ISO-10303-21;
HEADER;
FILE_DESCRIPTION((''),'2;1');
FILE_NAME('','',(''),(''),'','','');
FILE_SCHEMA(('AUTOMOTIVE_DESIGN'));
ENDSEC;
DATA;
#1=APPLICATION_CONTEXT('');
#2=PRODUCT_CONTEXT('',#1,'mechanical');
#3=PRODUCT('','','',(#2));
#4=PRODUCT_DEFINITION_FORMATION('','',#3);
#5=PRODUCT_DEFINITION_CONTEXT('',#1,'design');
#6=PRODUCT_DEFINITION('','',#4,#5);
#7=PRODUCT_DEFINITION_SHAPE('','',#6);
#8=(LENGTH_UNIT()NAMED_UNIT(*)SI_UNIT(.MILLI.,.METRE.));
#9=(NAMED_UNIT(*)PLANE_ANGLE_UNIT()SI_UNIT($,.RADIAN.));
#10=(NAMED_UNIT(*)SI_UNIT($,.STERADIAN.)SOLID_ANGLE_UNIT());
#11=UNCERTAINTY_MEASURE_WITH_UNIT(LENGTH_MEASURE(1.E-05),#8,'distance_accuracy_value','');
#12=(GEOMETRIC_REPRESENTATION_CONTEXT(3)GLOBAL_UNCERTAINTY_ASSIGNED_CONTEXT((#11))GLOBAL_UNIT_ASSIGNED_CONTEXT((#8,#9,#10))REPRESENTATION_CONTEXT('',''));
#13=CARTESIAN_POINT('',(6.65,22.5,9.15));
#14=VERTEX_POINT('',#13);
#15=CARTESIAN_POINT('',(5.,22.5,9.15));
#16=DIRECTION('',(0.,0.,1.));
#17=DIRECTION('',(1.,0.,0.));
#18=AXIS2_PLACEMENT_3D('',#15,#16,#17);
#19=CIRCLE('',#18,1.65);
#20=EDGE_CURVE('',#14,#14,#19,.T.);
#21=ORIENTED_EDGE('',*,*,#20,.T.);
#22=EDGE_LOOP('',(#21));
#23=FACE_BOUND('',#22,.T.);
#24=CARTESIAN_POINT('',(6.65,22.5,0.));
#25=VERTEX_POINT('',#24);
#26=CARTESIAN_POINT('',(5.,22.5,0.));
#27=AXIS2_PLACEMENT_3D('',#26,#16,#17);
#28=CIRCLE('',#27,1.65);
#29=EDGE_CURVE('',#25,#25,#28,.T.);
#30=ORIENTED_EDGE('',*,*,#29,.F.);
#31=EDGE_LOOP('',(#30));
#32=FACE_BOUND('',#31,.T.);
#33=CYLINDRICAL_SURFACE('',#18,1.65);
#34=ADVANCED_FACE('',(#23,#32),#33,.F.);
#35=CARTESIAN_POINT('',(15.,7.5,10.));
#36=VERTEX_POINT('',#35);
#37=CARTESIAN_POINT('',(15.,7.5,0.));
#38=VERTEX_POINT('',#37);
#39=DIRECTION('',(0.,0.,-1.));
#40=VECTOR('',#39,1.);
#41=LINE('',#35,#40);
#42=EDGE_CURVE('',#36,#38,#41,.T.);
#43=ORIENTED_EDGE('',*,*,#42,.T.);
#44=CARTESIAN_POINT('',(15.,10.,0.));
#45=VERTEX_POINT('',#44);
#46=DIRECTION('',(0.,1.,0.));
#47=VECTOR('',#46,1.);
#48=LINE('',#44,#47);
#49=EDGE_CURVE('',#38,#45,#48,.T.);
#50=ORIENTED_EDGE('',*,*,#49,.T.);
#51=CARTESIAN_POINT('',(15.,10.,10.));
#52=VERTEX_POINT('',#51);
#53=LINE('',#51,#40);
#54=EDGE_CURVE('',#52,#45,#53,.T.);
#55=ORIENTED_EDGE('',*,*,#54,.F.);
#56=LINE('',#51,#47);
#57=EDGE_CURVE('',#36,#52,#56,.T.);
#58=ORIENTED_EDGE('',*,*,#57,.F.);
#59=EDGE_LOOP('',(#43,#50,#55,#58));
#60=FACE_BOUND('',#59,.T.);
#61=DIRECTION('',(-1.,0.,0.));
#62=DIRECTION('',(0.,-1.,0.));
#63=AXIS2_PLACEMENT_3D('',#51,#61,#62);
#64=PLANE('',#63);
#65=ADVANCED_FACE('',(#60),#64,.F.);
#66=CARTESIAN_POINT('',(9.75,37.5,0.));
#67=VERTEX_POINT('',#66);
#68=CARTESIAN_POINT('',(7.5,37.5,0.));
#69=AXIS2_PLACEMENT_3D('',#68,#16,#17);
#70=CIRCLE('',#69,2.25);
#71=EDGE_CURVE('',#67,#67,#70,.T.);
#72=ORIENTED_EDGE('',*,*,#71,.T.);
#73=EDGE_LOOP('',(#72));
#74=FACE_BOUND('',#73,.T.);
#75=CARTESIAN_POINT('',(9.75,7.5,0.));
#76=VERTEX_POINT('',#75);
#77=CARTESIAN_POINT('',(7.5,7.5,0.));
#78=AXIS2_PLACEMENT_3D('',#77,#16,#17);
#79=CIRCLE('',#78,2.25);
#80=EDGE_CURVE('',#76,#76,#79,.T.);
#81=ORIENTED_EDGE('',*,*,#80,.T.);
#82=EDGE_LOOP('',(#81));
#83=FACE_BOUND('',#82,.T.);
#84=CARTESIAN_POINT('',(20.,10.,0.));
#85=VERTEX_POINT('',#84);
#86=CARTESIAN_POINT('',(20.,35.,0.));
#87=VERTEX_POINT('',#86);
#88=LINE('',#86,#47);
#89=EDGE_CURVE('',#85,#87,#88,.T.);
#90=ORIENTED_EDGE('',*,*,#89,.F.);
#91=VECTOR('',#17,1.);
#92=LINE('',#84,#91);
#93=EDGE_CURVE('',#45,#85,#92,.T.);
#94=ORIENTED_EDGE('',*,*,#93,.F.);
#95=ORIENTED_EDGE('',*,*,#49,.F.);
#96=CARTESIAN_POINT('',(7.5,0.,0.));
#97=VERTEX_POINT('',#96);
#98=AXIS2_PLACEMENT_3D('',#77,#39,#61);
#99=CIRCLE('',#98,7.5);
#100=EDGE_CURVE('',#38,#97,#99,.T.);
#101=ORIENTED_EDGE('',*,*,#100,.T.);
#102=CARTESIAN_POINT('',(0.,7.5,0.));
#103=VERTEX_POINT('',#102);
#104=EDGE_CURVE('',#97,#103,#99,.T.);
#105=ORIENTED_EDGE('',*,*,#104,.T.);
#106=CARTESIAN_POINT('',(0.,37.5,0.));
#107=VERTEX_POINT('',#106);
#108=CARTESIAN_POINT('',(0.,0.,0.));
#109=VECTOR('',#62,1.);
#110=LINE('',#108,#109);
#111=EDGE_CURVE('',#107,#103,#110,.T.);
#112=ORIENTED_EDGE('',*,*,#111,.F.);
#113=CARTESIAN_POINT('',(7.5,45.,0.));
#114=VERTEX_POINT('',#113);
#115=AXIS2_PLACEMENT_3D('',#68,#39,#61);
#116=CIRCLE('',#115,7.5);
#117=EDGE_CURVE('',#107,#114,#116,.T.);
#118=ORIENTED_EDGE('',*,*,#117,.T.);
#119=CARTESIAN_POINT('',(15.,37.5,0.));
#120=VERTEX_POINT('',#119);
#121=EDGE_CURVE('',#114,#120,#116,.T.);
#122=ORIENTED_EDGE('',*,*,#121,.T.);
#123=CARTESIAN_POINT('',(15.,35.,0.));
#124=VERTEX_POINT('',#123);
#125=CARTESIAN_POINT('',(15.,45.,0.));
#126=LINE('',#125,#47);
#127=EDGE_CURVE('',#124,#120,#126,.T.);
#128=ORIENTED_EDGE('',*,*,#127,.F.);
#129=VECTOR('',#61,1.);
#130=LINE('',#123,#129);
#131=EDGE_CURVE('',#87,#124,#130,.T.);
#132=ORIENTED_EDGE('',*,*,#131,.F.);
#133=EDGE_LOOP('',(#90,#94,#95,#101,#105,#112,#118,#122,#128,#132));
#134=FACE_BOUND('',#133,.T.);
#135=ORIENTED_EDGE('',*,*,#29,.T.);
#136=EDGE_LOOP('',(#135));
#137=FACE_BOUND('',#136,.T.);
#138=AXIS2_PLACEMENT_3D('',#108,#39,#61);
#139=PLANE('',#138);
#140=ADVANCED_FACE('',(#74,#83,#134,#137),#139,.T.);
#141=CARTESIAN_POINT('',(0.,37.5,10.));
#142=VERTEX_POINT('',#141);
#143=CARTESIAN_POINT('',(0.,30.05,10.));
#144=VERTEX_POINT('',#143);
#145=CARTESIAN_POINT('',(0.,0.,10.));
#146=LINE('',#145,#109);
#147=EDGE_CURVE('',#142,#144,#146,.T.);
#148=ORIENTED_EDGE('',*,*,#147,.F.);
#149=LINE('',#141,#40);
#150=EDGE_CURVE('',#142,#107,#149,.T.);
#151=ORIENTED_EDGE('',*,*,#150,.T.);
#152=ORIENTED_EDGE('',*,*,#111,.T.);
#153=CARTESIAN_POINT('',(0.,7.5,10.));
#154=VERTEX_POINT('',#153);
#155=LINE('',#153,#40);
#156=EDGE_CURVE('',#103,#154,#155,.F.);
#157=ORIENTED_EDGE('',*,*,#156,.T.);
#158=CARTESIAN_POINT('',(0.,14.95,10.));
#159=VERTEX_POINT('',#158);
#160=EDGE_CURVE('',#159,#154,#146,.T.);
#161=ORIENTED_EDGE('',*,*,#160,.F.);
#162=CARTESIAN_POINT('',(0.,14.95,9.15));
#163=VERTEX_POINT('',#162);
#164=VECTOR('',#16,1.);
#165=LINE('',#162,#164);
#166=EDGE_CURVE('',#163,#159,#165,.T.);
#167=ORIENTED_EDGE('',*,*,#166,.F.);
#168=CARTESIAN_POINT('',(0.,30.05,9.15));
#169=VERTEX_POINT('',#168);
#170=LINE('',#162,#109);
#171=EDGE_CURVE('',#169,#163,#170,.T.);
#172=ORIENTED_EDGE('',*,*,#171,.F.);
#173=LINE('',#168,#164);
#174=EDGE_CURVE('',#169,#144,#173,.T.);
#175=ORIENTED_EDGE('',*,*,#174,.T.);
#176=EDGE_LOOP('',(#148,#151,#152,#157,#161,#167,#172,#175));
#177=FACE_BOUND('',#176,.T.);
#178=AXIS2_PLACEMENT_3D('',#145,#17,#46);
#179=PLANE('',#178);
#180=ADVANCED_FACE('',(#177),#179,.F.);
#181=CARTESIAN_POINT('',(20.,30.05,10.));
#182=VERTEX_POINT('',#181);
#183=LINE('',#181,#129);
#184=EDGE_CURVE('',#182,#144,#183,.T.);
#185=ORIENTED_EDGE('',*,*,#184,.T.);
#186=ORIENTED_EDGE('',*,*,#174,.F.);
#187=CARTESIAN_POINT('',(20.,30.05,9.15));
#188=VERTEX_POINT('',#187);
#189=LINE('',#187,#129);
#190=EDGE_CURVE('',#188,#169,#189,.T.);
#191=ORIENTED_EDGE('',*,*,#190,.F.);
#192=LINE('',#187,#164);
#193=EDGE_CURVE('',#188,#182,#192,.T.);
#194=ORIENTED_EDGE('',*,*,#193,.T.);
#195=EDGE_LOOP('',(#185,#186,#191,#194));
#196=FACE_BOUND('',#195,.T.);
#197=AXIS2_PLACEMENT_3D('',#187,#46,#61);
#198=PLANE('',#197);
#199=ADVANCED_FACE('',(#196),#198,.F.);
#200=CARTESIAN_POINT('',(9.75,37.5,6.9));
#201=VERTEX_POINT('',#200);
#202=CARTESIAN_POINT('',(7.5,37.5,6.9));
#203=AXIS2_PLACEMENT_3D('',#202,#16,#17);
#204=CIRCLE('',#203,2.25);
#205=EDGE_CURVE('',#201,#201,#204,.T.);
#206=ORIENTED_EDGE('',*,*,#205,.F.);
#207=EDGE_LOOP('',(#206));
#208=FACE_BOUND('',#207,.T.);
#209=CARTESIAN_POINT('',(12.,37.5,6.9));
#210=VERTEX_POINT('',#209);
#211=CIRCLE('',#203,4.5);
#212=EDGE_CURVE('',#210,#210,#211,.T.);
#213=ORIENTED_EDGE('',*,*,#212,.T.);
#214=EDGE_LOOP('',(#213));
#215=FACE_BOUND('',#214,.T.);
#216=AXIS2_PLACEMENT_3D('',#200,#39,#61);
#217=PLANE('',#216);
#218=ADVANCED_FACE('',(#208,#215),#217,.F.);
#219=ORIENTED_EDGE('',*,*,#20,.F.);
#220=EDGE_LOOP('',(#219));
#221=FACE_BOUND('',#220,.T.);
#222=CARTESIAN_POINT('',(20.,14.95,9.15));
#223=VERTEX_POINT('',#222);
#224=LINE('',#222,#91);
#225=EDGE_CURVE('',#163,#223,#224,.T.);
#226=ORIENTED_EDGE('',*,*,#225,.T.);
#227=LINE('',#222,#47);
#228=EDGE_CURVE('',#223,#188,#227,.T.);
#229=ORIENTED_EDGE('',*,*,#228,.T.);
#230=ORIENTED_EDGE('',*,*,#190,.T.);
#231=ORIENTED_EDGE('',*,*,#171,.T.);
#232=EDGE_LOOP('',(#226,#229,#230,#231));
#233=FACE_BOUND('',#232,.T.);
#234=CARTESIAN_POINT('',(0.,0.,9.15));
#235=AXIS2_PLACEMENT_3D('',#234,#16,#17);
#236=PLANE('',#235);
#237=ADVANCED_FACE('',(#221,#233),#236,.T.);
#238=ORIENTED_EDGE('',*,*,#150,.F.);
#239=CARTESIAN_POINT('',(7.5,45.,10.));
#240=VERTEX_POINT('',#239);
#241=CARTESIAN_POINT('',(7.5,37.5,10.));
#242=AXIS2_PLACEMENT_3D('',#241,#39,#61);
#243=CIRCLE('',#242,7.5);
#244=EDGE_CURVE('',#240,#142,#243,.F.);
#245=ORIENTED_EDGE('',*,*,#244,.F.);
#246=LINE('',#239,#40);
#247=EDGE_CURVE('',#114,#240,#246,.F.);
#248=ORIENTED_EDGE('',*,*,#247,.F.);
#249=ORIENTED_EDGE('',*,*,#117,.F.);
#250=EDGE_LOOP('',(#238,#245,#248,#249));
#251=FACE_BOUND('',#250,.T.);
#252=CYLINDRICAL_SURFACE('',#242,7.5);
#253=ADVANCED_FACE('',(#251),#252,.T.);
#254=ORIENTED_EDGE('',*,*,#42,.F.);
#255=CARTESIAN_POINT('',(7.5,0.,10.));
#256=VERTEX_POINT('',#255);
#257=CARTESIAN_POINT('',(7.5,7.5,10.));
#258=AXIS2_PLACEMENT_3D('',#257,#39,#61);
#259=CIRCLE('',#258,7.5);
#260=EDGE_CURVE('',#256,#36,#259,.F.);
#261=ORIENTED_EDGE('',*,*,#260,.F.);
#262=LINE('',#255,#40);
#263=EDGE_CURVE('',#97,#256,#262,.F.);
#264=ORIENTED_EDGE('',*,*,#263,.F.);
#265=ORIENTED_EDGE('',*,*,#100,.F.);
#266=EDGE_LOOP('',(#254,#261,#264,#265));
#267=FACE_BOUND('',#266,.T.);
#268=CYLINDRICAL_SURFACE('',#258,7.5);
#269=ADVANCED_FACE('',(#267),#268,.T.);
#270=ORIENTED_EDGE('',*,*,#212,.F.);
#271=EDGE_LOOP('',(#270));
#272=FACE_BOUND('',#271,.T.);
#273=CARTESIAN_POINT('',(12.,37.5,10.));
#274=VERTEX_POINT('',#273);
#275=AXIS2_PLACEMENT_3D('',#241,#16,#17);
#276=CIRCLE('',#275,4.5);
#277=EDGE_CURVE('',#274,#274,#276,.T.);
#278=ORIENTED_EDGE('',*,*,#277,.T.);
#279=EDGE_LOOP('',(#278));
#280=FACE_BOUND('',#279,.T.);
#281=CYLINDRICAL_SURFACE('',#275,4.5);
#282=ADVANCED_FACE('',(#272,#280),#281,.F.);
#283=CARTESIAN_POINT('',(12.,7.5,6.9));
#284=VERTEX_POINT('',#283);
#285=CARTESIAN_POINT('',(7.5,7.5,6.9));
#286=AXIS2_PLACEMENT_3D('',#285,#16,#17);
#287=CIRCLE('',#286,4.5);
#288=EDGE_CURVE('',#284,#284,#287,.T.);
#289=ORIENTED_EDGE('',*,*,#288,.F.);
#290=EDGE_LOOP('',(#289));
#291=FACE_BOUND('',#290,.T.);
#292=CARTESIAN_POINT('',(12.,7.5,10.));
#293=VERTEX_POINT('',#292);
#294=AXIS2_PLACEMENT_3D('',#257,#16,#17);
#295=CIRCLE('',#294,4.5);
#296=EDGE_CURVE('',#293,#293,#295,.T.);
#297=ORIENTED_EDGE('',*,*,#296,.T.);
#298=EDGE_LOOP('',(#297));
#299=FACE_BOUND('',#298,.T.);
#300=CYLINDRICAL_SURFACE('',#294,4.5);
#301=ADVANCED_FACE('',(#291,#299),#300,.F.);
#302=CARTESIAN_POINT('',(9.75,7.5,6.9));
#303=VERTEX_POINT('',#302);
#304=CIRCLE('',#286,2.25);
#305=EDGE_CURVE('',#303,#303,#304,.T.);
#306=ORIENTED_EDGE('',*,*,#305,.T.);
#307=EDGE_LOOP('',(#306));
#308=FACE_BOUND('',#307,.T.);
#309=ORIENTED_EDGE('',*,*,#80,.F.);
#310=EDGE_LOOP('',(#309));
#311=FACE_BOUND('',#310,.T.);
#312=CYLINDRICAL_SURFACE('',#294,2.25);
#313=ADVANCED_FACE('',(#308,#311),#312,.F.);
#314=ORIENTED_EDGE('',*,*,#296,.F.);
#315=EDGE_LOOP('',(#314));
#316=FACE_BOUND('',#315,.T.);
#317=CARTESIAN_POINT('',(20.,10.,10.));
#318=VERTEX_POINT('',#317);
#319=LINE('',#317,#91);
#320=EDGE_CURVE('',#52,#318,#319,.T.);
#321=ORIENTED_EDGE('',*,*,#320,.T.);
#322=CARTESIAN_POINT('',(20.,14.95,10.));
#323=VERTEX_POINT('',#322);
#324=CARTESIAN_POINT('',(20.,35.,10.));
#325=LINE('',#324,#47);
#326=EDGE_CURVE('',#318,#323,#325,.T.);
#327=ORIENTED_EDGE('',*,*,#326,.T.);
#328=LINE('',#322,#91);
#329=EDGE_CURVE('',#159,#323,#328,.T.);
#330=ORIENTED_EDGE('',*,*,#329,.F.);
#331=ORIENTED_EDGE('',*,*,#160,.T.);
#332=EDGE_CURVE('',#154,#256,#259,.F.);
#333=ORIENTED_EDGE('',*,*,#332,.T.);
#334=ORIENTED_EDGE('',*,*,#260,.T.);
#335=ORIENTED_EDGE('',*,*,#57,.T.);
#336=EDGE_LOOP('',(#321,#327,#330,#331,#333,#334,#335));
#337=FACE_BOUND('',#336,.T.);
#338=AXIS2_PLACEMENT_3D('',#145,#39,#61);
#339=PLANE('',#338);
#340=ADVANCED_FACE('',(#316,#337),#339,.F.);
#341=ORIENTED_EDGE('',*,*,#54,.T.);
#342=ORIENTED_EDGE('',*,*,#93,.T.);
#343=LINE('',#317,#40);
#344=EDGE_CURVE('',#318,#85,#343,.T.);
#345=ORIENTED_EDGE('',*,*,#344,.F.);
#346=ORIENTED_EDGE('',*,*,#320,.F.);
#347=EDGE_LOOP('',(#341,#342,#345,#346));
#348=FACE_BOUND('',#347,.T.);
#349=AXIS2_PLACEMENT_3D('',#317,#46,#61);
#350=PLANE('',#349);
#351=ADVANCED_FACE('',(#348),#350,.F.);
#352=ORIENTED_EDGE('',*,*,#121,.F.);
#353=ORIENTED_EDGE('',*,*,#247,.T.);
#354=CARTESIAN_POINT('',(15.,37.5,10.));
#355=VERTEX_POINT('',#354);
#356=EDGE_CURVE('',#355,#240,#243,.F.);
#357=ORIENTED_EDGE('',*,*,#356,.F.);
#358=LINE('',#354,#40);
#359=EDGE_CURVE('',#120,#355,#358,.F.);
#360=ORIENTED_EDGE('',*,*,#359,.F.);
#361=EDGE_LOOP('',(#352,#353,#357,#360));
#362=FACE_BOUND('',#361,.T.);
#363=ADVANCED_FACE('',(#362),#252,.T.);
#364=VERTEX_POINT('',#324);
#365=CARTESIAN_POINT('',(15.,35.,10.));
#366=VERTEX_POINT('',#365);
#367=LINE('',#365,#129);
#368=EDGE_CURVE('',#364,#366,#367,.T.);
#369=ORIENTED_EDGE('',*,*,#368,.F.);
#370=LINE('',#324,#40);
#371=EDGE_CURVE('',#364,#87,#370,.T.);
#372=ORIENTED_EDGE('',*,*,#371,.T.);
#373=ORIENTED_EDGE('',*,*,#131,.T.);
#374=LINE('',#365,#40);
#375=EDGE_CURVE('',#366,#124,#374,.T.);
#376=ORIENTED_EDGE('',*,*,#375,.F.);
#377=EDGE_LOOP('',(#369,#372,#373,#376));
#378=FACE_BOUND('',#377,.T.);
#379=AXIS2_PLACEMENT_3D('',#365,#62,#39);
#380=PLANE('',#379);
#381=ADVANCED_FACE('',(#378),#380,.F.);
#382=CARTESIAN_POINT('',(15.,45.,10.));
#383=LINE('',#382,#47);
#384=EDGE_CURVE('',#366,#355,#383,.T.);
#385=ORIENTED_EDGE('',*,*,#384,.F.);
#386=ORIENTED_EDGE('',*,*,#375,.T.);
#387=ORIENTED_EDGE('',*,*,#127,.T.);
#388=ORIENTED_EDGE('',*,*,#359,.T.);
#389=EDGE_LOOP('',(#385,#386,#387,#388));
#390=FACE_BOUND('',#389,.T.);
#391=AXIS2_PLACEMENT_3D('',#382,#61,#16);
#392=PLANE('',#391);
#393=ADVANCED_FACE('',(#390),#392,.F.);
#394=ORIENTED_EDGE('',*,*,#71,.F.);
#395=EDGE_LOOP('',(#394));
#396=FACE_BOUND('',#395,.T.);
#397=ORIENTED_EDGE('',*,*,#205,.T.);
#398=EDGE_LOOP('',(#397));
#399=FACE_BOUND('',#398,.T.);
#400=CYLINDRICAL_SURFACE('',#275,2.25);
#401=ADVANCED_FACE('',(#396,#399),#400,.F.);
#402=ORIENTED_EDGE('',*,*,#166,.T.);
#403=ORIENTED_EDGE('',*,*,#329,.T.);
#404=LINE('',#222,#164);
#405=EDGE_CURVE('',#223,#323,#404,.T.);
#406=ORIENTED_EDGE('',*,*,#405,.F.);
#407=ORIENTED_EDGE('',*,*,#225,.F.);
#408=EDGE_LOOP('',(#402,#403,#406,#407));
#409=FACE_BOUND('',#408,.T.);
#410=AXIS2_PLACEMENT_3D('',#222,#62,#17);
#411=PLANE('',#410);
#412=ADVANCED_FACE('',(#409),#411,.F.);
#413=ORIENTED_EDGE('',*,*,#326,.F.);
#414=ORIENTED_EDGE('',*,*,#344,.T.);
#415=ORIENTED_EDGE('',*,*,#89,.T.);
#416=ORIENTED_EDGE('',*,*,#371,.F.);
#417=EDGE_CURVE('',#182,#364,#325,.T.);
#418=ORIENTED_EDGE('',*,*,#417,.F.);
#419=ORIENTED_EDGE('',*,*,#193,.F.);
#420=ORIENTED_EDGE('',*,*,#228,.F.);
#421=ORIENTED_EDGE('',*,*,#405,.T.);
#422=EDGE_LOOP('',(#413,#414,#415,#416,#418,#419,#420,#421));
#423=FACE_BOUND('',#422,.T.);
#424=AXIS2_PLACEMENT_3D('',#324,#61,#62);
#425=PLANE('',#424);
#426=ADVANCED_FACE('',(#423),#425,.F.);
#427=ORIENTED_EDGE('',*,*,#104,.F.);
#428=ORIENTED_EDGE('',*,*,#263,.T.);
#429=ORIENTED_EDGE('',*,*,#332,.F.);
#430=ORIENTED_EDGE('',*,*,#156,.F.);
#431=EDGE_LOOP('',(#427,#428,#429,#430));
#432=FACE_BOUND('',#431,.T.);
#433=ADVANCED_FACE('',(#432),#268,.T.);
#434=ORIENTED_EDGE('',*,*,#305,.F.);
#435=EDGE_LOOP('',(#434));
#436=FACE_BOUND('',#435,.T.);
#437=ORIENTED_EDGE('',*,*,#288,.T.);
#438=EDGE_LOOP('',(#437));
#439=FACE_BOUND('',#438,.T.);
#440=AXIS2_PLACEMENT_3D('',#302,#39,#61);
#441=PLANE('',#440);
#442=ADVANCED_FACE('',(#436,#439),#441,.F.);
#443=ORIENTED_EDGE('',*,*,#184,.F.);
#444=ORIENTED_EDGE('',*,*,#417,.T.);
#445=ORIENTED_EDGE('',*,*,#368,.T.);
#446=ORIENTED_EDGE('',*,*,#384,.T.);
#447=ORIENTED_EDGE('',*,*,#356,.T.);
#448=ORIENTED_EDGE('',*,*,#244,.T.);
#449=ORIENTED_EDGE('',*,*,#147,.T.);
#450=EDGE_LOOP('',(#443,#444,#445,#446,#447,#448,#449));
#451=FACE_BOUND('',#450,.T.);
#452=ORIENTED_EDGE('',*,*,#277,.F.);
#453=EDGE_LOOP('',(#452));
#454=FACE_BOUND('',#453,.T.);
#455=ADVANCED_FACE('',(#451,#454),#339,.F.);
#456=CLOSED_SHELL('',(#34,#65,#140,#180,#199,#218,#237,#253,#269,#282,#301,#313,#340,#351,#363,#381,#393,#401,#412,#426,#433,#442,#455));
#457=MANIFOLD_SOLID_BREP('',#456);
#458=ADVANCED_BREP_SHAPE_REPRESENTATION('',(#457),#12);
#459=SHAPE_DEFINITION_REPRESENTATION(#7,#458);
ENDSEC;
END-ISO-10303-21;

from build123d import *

# Parameters (mm, degrees)
AUFSATZ_LINEAR_AUSTRAGEN1_DEPTH                      = 10
SKIZZE2_W                                            = 20
SKIZZE2_H                                            = 15.1
SCHNITT_LINEAR_AUSTRAGEN1_DEPTH                      = 0.85
STIRNSENKUNG_F_R_M4_FLACHKOPFSCHRAUBE_MI_D           = 4.5
STIRNSENKUNG_F_R_M4_FLACHKOPFSCHRAUBE_MI_CBORE_D     = 9
STIRNSENKUNG_F_R_M4_FLACHKOPFSCHRAUBE_MI_CBORE_DEPTH = 3.1
M4_GEWINDEBOHRUNG1_D                                 = 3.3
VERRUNDUNG1_R                                        = 7.5


with BuildPart() as part:
    # Skizze1 → Aufsatz-Linear austragen1 (new body)
    with BuildSketch(Plane.XY):
        Polygon((0, 0), (0, 45), (15, 45), (15, 35), (20, 35), (20, 10), (15, 10), (15, 0), align=None)
    extrude(amount=AUFSATZ_LINEAR_AUSTRAGEN1_DEPTH)

    # Skizze2 → Schnitt-Linear austragen1 (cut)
    with BuildSketch(Plane.XY.offset(10)):
        with Locations((10, 22.5)):
            Rectangle(SKIZZE2_W, SKIZZE2_H)
    extrude(amount=-SCHNITT_LINEAR_AUSTRAGEN1_DEPTH, mode=Mode.SUBTRACT)

    # Stirnsenkung für M4 Flachkopfschraube mit Schlitz1 (through all)
    with Locations(Plane.XY.offset(10)):
        with Locations((7.5, 37.5), (7.5, 7.5)):
            CounterBoreHole(STIRNSENKUNG_F_R_M4_FLACHKOPFSCHRAUBE_MI_D / 2, STIRNSENKUNG_F_R_M4_FLACHKOPFSCHRAUBE_MI_CBORE_D / 2, STIRNSENKUNG_F_R_M4_FLACHKOPFSCHRAUBE_MI_CBORE_DEPTH)

    # M4 Gewindebohrung1 (through all)
    with Locations(Plane.XY.offset(9.15)):
        with Locations((5, 22.5)):
            Hole(M4_GEWINDEBOHRUNG1_D / 2)

    # Verrundung1
    verrundung1_edges = [part.edges().sort_by_distance(p)[0] for p in [
        (0, 0, 5),
        (15, 0, 5),
        (15, 45, 5),
        (0, 45, 5),
    ]]
    fillet(verrundung1_edges, radius=VERRUNDUNG1_R - 0.0001)  # a hair under: the kernel refuses the full size


solid = part.part
